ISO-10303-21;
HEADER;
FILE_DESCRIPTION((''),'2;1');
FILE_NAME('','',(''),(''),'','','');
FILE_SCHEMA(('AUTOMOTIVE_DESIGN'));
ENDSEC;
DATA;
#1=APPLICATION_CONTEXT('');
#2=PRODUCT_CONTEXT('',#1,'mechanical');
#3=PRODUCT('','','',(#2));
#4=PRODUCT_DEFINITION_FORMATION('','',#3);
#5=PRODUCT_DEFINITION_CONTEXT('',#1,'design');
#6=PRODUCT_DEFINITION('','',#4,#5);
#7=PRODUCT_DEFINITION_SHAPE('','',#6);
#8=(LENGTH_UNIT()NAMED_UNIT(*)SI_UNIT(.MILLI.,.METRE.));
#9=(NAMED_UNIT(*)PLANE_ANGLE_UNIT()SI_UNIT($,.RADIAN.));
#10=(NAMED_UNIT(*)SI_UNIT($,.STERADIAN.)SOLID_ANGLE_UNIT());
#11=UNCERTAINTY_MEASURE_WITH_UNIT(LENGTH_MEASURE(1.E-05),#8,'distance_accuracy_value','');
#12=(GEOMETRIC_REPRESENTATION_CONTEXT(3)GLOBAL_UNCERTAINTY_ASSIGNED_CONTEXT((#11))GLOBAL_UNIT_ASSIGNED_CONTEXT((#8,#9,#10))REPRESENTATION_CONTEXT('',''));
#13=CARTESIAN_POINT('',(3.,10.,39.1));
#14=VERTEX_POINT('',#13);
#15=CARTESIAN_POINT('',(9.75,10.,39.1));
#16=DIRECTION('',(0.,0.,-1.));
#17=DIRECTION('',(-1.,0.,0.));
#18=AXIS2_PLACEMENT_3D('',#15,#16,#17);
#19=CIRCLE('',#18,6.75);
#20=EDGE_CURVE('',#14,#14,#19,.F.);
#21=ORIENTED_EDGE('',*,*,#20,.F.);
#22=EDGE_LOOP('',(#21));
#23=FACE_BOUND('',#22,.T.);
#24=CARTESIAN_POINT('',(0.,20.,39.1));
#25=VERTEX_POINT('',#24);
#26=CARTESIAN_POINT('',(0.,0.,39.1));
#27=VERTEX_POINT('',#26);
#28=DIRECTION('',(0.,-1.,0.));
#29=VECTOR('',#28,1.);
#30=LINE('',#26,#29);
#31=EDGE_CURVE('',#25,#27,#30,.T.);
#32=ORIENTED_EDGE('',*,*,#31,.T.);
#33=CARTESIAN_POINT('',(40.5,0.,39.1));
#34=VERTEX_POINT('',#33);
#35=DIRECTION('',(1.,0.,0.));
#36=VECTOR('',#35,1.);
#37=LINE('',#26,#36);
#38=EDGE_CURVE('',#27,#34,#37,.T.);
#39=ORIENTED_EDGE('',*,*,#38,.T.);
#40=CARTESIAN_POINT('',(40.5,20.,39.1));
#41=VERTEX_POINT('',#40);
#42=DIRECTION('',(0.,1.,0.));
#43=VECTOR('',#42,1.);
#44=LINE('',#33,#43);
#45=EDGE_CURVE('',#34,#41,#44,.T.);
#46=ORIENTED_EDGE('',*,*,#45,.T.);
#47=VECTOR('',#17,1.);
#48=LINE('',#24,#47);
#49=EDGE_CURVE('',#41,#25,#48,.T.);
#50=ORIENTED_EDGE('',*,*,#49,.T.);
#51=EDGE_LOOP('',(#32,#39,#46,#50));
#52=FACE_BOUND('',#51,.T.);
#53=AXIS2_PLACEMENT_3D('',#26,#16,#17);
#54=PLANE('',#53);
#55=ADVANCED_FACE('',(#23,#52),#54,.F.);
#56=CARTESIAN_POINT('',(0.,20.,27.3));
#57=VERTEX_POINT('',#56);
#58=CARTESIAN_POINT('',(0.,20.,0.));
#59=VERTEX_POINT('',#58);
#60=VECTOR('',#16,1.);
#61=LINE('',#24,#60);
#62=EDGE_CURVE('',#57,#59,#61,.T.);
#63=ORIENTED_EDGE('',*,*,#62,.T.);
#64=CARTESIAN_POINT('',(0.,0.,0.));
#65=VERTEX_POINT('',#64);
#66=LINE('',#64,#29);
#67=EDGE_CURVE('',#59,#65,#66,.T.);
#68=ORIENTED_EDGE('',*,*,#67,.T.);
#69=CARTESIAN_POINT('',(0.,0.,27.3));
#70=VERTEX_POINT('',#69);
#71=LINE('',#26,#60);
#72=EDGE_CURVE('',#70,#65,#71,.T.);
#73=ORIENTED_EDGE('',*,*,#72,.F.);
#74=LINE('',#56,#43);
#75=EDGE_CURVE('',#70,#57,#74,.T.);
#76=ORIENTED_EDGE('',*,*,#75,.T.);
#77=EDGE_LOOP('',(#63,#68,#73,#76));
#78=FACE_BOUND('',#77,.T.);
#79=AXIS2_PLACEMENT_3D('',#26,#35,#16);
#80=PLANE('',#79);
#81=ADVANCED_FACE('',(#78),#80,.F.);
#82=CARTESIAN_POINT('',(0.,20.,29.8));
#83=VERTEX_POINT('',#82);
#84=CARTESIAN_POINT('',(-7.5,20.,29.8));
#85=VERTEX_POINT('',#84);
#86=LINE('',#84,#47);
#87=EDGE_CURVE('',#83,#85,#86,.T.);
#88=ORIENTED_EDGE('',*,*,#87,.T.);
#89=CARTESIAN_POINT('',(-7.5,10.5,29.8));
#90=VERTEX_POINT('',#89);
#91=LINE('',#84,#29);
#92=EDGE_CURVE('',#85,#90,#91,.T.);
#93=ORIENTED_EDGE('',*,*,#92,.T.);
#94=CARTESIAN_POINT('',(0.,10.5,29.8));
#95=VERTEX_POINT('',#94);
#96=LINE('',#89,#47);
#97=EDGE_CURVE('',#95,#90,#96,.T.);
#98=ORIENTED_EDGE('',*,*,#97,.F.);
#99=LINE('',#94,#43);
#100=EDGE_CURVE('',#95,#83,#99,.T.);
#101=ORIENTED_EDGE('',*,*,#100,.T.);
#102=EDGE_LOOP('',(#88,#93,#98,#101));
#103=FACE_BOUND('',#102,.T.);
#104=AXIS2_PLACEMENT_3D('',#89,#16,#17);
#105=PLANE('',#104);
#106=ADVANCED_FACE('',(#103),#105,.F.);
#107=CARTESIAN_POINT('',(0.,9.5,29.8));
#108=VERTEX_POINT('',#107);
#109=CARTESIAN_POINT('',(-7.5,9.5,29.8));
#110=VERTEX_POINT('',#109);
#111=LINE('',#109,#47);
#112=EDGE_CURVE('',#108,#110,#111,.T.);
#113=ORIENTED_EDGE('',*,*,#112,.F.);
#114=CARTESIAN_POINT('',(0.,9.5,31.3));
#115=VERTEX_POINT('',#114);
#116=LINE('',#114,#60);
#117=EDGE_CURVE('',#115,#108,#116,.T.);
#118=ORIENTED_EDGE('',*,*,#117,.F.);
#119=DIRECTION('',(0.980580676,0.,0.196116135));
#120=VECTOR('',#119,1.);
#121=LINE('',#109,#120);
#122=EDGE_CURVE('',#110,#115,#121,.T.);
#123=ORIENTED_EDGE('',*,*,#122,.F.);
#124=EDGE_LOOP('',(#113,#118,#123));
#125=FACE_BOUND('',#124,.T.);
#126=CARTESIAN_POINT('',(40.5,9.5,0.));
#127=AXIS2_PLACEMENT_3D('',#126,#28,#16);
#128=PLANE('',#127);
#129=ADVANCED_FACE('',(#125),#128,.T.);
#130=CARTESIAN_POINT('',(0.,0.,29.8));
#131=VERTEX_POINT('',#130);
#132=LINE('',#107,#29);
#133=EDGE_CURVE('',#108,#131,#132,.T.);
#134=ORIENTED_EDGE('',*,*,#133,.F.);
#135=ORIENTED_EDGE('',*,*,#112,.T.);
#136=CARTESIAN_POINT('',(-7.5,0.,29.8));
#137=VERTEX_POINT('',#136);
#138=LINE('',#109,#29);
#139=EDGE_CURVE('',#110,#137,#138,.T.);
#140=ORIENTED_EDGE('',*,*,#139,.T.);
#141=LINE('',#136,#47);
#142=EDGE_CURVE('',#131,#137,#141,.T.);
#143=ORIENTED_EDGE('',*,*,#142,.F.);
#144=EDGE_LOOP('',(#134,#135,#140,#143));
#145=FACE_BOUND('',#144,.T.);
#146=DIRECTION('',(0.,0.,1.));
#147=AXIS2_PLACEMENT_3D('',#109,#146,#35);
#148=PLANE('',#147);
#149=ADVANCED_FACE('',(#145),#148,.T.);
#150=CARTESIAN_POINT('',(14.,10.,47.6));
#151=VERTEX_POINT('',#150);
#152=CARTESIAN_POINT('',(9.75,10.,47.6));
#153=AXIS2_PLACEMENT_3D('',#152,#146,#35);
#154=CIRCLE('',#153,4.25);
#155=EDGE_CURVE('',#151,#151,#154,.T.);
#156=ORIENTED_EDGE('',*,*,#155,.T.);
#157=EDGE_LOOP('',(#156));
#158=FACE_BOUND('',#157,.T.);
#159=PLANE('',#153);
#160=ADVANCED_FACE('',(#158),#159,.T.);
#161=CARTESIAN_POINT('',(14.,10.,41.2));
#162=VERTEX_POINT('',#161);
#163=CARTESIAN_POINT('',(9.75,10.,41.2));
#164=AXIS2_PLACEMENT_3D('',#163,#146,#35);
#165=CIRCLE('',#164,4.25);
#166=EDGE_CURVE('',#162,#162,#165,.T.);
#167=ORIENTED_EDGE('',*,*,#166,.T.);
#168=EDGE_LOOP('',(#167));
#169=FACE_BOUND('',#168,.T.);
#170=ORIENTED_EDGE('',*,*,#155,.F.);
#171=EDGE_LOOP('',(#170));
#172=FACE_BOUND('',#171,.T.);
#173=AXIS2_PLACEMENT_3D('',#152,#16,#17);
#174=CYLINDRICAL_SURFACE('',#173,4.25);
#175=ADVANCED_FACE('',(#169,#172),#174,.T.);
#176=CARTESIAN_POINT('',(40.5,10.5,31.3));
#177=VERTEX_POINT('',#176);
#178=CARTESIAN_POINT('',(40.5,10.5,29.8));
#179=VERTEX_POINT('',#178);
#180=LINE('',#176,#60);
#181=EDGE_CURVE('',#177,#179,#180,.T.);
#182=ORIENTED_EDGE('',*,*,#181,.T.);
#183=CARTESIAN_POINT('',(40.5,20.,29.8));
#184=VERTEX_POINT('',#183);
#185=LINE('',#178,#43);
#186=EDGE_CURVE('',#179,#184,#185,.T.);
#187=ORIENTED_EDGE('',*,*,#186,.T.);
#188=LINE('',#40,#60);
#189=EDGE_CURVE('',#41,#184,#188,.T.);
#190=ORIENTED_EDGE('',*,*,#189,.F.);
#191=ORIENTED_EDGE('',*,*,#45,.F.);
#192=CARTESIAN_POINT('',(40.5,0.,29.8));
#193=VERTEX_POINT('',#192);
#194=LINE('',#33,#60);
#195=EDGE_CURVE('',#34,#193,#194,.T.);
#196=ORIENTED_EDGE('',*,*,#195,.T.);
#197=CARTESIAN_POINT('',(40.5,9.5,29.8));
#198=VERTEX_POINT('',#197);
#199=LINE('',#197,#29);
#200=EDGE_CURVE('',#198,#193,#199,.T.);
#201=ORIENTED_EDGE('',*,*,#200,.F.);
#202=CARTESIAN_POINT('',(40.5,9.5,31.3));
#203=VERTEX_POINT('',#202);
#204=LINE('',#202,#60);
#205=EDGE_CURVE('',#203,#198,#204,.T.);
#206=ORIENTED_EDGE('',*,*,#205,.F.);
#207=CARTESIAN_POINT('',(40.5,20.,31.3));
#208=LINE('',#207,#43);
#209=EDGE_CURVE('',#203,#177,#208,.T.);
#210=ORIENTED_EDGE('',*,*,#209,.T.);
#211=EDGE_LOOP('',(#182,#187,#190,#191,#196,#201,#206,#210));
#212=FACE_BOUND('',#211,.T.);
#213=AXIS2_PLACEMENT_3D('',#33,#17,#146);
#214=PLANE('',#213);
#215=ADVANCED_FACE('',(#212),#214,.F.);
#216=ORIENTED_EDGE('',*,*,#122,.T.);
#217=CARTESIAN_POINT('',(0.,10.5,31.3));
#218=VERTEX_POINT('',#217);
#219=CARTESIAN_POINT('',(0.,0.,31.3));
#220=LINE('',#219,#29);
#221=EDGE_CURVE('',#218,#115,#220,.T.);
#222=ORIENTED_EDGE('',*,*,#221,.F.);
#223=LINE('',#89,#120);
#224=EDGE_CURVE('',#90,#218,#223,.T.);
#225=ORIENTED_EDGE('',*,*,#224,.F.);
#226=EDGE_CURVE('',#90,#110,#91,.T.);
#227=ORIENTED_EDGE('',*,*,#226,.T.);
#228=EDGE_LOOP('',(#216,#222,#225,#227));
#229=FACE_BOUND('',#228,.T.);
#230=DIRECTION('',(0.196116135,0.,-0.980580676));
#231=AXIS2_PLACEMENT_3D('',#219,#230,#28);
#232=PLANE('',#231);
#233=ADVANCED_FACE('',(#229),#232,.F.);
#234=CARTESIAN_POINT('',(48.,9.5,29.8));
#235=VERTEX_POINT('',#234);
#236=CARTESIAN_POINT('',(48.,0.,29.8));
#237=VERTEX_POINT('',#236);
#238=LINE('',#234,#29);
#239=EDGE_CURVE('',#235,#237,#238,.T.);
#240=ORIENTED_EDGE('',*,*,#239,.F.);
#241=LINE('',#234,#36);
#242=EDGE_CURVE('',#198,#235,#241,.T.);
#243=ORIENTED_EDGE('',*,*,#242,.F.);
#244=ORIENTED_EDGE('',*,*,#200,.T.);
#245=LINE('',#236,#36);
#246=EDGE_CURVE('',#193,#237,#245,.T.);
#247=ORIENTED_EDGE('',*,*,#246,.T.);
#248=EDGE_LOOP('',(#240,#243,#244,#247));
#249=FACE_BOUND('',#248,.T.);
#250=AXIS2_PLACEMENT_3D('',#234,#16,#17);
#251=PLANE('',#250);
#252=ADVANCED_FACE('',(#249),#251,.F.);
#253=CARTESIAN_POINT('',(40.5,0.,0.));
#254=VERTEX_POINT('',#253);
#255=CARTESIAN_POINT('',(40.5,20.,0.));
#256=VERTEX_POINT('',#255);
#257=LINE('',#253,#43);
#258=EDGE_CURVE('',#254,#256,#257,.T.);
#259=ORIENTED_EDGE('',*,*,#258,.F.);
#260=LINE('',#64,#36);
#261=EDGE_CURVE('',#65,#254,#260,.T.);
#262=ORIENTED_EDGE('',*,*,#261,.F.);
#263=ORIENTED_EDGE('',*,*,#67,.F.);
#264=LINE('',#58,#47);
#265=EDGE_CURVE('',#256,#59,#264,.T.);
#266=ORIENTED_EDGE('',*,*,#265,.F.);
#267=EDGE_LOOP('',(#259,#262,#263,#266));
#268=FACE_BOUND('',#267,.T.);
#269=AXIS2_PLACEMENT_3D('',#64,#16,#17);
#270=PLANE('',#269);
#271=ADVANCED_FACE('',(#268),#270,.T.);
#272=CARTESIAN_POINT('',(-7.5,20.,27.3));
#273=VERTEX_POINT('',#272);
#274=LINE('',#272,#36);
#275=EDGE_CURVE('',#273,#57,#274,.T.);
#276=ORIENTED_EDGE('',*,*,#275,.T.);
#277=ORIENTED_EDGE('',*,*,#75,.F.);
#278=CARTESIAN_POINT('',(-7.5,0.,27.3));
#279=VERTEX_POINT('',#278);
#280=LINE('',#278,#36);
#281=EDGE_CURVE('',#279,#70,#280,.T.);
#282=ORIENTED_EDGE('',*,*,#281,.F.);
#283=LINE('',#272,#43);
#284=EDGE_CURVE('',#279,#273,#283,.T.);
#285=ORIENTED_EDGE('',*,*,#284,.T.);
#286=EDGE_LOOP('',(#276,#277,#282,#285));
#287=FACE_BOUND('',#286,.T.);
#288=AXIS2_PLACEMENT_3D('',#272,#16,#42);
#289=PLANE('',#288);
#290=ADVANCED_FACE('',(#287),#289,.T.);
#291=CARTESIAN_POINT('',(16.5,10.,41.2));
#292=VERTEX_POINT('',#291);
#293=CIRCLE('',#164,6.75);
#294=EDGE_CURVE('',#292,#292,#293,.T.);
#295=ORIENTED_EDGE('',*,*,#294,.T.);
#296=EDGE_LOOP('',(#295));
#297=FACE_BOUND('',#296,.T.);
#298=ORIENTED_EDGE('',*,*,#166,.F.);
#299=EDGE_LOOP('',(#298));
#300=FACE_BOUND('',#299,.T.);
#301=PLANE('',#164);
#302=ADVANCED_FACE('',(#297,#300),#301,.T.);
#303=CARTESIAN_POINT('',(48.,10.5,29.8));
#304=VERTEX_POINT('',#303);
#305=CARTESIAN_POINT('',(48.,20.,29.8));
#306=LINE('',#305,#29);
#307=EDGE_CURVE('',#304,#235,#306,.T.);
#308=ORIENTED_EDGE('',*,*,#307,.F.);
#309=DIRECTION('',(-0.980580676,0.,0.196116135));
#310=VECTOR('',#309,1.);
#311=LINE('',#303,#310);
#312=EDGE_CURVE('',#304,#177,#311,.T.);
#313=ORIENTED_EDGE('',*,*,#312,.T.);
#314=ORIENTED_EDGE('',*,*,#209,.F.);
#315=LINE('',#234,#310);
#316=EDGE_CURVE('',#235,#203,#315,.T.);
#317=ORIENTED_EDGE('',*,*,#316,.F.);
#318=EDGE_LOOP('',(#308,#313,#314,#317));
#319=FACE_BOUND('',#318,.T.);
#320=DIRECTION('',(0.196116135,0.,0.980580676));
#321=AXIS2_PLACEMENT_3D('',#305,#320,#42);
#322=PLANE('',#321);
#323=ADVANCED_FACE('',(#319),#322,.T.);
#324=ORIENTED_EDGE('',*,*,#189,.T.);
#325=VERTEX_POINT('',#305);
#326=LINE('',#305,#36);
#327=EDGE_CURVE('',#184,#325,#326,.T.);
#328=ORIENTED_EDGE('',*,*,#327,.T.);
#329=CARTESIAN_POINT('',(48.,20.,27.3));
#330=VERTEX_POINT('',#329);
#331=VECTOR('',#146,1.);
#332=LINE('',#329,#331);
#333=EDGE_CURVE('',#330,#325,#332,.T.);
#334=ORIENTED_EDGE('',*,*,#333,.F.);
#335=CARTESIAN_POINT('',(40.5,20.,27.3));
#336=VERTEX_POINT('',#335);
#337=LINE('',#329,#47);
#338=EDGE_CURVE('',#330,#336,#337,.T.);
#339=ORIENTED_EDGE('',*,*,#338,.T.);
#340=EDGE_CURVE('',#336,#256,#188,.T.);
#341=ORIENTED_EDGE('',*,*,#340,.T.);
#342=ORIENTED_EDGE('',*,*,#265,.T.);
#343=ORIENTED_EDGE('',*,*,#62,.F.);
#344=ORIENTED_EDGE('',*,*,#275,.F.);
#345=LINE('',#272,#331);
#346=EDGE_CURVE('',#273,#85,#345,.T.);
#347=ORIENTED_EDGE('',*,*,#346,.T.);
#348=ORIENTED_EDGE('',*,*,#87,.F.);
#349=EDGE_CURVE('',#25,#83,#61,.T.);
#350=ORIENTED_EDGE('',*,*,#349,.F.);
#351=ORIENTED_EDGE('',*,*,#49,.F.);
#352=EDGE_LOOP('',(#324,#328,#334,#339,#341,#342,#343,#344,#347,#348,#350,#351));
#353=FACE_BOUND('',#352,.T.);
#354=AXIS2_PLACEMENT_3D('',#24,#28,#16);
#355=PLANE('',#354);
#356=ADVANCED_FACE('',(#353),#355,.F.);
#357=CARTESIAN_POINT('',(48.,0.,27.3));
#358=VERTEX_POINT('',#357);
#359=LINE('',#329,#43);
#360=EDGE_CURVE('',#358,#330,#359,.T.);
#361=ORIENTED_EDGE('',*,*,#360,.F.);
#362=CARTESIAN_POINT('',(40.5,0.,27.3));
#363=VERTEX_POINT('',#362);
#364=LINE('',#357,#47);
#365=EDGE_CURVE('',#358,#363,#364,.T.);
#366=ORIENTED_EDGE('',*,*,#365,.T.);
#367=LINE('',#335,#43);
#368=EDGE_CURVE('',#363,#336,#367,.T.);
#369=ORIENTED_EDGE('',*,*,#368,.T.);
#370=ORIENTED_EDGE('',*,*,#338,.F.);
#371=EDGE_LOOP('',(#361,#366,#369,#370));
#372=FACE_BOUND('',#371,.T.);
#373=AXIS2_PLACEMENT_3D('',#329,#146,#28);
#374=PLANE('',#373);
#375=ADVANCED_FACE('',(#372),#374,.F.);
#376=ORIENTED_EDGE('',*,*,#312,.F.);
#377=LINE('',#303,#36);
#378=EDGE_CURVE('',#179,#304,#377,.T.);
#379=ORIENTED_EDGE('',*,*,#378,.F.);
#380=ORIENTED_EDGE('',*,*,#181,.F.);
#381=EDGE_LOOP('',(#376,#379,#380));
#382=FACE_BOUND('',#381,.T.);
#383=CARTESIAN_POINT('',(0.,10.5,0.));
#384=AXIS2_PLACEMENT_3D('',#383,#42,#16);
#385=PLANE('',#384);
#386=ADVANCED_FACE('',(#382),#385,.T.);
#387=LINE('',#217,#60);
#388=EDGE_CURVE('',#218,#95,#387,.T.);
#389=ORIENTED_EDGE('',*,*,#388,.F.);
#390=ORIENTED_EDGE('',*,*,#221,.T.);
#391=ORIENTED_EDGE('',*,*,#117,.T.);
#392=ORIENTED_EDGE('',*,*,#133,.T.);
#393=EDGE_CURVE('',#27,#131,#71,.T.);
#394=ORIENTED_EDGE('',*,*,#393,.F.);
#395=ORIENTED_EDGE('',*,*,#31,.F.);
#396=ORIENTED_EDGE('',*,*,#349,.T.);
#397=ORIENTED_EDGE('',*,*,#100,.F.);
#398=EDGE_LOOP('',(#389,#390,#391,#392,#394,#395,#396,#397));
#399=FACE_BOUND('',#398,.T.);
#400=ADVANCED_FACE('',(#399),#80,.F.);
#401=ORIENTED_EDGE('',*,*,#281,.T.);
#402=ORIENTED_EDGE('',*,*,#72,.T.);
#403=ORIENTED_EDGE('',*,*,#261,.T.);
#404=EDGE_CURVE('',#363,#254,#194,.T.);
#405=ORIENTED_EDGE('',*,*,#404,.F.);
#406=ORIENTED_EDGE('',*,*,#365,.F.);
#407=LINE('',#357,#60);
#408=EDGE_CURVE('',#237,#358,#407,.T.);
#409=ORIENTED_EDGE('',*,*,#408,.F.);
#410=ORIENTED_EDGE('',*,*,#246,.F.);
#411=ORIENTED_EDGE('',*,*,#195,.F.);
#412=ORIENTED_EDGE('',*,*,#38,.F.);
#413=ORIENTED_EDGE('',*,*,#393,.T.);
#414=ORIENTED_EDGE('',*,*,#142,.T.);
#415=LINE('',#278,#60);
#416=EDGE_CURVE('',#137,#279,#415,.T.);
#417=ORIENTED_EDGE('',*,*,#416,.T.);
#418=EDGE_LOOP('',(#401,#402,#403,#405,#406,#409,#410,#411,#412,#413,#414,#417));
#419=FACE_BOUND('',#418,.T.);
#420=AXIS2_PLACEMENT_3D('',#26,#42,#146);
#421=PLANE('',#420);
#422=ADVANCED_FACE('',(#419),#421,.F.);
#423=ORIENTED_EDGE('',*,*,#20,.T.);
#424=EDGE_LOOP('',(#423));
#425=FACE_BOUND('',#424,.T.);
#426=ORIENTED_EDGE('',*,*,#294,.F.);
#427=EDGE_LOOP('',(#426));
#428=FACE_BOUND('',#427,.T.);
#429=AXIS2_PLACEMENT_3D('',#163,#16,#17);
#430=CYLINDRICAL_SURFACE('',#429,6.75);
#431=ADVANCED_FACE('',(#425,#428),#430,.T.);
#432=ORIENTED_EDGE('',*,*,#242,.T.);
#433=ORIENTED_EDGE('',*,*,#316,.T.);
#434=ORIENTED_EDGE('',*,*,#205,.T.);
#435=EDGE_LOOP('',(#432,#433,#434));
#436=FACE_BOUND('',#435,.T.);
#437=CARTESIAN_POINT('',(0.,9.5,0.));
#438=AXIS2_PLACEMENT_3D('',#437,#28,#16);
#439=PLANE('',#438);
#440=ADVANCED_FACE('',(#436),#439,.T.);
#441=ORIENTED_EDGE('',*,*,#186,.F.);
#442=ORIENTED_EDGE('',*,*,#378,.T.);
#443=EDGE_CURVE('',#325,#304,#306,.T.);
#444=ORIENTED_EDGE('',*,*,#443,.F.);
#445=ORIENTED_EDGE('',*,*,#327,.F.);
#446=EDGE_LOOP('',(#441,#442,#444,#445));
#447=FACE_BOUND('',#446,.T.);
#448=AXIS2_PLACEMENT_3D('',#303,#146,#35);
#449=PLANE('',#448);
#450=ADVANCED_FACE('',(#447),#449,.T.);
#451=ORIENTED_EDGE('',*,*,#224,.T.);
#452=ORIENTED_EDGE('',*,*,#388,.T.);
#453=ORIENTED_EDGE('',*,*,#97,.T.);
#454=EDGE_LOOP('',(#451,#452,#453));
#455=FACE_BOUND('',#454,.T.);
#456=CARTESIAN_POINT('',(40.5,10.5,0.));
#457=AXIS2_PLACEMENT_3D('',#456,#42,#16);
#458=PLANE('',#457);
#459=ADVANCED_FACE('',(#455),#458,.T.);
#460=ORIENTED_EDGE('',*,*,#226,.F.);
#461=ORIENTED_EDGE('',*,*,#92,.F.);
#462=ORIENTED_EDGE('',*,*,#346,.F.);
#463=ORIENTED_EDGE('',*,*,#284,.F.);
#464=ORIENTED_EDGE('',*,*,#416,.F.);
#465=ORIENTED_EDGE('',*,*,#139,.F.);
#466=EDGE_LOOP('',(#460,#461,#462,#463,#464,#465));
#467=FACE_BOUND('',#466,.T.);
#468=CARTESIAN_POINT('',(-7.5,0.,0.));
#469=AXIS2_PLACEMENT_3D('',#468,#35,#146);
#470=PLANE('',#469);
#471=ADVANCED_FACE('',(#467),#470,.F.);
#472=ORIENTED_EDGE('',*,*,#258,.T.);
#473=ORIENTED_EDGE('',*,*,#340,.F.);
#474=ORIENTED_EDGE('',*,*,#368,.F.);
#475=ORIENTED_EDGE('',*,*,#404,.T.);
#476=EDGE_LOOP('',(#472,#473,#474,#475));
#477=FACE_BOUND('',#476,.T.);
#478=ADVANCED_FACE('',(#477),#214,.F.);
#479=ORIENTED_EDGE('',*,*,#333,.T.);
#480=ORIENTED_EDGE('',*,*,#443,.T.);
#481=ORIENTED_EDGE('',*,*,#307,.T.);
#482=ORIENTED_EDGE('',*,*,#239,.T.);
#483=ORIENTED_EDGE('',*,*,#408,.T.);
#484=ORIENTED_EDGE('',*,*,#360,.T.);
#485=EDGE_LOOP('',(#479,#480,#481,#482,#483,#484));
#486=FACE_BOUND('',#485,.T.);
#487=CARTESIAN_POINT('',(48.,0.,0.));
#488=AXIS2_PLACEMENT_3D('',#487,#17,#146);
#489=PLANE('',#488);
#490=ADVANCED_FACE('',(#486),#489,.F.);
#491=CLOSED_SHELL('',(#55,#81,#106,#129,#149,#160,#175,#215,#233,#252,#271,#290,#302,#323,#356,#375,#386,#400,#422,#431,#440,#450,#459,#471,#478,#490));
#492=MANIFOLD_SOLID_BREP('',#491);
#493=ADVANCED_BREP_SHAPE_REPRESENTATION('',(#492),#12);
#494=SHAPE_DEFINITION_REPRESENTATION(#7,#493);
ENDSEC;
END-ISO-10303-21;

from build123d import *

# Parameters (mm, degrees)
SKETCH1_W             = 40.5
SKETCH1_H             = 20
BOSS_EXTRUDE1_DEPTH   = 39.1
SKETCH2_R             = 6.75
BOSS_EXTRUDE2_DEPTH   = 2.1
SKETCH3_R             = 4.25
BOSS_EXTRUDE3_DEPTH   = 6.4
SKETCH4_W             = 2.5
SKETCH4_H             = 20
BOSS_EXTRUDE4_DEPTH   = 7.5
CHAMFER1_SIZE2        = 7.5
CHAMFER1_SIZE         = 1.5
CUT_EXTRUDE1_DEPTH    = 9.5
CHAMFER2_SIZE2        = 7.5
CHAMFER2_SIZE         = 1.5
MIRROR19_COPY_1_DEPTH = 9.5


with BuildPart() as part:
    # Sketch1 → Boss-Extrude1 (new body)
    with BuildSketch(Plane.XY):
        with Locations((20.25, 10)):
            Rectangle(SKETCH1_W, SKETCH1_H)
    extrude(amount=BOSS_EXTRUDE1_DEPTH)

    # Sketch2 → Boss-Extrude2 (add)
    with BuildSketch(Plane.XY.offset(39.1)):
        with Locations(Location((9.75, 10, 0), (0, 0, 180))):
            Circle(SKETCH2_R)
    extrude(amount=BOSS_EXTRUDE2_DEPTH)

    # Sketch3 → Boss-Extrude3 (add)
    with BuildSketch(Plane.XY.offset(41.2)):
        with Locations((9.75, 10)):
            Circle(SKETCH3_R)
    extrude(amount=BOSS_EXTRUDE3_DEPTH)

    # Sketch4 → Boss-Extrude4 (add)
    with BuildSketch(Plane(origin=(40.5, 0, 0), x_dir=(0, 0, -1), z_dir=(1, 0, 0))):
        with Locations((-28.55, 10)):
            Rectangle(SKETCH4_W, SKETCH4_H)
    boss_extrude4 = extrude(amount=BOSS_EXTRUDE4_DEPTH)

    # Chamfer1
    chamfer1_edges = [part.edges().sort_by_distance(p)[0] for p in [
        (40.5, 10, 29.8),
    ]]
    chamfer1_side = [part.faces().sort_by_distance(p)[0] for p in [
        (40.5, 10, 29.83),
    ]]
    chamfer(chamfer1_edges, length=CHAMFER1_SIZE - 0.0001, length2=CHAMFER1_SIZE2 - 0.0001, reference=chamfer1_side[0])  # a hair under: the kernel refuses the full size

    # Sketch5 → Cut-Extrude1 (cut)
    with BuildSketch(Plane.XZ):
        Polygon((48, 29.8), (40.5, 29.8), (40.5, 31.3), align=None)
    cut_extrude1 = extrude(amount=-CUT_EXTRUDE1_DEPTH, mode=Mode.SUBTRACT)

    # Mirror1: Cut-Extrude1 across plane
    add(cut_extrude1.mirror(Plane.ZX.offset(10)), mode=Mode.SUBTRACT)

    # Mirror11: Boss-Extrude4 across plane
    add(boss_extrude4.mirror(Plane(origin=(20.25, 0, 0), x_dir=(0, 0, 1), z_dir=(1, 0, 0))))

    # Chamfer2
    chamfer2_edges = [part.edges().sort_by_distance(p)[0] for p in [
        (0, 10, 29.8),
    ]]
    chamfer2_side = [part.faces().sort_by_distance(p)[0] for p in [
        (0, 10, 29.83),
    ]]
    chamfer(chamfer2_edges, length=CHAMFER2_SIZE - 0.0001, length2=CHAMFER2_SIZE2 - 0.0001, reference=chamfer2_side[0])  # a hair under: the kernel refuses the full size

    # Mirror19: Cut-Extrude1 across plane
    add(cut_extrude1.mirror(Plane(origin=(20.25, 0, 0), x_dir=(0, 0, 1), z_dir=(1, 0, 0))), mode=Mode.SUBTRACT)

    # Mirror19 copy 1 sketch → Mirror19 copy 1 (cut)
    with BuildSketch(Plane(origin=(40.5, 20, 0), x_dir=(-1, 0, 0), z_dir=(0, 1, 0))):
        Polygon((48, 29.8), (40.5, 29.8), (40.5, 31.3), align=None)
    extrude(amount=-MIRROR19_COPY_1_DEPTH, mode=Mode.SUBTRACT)


solid = part.part
